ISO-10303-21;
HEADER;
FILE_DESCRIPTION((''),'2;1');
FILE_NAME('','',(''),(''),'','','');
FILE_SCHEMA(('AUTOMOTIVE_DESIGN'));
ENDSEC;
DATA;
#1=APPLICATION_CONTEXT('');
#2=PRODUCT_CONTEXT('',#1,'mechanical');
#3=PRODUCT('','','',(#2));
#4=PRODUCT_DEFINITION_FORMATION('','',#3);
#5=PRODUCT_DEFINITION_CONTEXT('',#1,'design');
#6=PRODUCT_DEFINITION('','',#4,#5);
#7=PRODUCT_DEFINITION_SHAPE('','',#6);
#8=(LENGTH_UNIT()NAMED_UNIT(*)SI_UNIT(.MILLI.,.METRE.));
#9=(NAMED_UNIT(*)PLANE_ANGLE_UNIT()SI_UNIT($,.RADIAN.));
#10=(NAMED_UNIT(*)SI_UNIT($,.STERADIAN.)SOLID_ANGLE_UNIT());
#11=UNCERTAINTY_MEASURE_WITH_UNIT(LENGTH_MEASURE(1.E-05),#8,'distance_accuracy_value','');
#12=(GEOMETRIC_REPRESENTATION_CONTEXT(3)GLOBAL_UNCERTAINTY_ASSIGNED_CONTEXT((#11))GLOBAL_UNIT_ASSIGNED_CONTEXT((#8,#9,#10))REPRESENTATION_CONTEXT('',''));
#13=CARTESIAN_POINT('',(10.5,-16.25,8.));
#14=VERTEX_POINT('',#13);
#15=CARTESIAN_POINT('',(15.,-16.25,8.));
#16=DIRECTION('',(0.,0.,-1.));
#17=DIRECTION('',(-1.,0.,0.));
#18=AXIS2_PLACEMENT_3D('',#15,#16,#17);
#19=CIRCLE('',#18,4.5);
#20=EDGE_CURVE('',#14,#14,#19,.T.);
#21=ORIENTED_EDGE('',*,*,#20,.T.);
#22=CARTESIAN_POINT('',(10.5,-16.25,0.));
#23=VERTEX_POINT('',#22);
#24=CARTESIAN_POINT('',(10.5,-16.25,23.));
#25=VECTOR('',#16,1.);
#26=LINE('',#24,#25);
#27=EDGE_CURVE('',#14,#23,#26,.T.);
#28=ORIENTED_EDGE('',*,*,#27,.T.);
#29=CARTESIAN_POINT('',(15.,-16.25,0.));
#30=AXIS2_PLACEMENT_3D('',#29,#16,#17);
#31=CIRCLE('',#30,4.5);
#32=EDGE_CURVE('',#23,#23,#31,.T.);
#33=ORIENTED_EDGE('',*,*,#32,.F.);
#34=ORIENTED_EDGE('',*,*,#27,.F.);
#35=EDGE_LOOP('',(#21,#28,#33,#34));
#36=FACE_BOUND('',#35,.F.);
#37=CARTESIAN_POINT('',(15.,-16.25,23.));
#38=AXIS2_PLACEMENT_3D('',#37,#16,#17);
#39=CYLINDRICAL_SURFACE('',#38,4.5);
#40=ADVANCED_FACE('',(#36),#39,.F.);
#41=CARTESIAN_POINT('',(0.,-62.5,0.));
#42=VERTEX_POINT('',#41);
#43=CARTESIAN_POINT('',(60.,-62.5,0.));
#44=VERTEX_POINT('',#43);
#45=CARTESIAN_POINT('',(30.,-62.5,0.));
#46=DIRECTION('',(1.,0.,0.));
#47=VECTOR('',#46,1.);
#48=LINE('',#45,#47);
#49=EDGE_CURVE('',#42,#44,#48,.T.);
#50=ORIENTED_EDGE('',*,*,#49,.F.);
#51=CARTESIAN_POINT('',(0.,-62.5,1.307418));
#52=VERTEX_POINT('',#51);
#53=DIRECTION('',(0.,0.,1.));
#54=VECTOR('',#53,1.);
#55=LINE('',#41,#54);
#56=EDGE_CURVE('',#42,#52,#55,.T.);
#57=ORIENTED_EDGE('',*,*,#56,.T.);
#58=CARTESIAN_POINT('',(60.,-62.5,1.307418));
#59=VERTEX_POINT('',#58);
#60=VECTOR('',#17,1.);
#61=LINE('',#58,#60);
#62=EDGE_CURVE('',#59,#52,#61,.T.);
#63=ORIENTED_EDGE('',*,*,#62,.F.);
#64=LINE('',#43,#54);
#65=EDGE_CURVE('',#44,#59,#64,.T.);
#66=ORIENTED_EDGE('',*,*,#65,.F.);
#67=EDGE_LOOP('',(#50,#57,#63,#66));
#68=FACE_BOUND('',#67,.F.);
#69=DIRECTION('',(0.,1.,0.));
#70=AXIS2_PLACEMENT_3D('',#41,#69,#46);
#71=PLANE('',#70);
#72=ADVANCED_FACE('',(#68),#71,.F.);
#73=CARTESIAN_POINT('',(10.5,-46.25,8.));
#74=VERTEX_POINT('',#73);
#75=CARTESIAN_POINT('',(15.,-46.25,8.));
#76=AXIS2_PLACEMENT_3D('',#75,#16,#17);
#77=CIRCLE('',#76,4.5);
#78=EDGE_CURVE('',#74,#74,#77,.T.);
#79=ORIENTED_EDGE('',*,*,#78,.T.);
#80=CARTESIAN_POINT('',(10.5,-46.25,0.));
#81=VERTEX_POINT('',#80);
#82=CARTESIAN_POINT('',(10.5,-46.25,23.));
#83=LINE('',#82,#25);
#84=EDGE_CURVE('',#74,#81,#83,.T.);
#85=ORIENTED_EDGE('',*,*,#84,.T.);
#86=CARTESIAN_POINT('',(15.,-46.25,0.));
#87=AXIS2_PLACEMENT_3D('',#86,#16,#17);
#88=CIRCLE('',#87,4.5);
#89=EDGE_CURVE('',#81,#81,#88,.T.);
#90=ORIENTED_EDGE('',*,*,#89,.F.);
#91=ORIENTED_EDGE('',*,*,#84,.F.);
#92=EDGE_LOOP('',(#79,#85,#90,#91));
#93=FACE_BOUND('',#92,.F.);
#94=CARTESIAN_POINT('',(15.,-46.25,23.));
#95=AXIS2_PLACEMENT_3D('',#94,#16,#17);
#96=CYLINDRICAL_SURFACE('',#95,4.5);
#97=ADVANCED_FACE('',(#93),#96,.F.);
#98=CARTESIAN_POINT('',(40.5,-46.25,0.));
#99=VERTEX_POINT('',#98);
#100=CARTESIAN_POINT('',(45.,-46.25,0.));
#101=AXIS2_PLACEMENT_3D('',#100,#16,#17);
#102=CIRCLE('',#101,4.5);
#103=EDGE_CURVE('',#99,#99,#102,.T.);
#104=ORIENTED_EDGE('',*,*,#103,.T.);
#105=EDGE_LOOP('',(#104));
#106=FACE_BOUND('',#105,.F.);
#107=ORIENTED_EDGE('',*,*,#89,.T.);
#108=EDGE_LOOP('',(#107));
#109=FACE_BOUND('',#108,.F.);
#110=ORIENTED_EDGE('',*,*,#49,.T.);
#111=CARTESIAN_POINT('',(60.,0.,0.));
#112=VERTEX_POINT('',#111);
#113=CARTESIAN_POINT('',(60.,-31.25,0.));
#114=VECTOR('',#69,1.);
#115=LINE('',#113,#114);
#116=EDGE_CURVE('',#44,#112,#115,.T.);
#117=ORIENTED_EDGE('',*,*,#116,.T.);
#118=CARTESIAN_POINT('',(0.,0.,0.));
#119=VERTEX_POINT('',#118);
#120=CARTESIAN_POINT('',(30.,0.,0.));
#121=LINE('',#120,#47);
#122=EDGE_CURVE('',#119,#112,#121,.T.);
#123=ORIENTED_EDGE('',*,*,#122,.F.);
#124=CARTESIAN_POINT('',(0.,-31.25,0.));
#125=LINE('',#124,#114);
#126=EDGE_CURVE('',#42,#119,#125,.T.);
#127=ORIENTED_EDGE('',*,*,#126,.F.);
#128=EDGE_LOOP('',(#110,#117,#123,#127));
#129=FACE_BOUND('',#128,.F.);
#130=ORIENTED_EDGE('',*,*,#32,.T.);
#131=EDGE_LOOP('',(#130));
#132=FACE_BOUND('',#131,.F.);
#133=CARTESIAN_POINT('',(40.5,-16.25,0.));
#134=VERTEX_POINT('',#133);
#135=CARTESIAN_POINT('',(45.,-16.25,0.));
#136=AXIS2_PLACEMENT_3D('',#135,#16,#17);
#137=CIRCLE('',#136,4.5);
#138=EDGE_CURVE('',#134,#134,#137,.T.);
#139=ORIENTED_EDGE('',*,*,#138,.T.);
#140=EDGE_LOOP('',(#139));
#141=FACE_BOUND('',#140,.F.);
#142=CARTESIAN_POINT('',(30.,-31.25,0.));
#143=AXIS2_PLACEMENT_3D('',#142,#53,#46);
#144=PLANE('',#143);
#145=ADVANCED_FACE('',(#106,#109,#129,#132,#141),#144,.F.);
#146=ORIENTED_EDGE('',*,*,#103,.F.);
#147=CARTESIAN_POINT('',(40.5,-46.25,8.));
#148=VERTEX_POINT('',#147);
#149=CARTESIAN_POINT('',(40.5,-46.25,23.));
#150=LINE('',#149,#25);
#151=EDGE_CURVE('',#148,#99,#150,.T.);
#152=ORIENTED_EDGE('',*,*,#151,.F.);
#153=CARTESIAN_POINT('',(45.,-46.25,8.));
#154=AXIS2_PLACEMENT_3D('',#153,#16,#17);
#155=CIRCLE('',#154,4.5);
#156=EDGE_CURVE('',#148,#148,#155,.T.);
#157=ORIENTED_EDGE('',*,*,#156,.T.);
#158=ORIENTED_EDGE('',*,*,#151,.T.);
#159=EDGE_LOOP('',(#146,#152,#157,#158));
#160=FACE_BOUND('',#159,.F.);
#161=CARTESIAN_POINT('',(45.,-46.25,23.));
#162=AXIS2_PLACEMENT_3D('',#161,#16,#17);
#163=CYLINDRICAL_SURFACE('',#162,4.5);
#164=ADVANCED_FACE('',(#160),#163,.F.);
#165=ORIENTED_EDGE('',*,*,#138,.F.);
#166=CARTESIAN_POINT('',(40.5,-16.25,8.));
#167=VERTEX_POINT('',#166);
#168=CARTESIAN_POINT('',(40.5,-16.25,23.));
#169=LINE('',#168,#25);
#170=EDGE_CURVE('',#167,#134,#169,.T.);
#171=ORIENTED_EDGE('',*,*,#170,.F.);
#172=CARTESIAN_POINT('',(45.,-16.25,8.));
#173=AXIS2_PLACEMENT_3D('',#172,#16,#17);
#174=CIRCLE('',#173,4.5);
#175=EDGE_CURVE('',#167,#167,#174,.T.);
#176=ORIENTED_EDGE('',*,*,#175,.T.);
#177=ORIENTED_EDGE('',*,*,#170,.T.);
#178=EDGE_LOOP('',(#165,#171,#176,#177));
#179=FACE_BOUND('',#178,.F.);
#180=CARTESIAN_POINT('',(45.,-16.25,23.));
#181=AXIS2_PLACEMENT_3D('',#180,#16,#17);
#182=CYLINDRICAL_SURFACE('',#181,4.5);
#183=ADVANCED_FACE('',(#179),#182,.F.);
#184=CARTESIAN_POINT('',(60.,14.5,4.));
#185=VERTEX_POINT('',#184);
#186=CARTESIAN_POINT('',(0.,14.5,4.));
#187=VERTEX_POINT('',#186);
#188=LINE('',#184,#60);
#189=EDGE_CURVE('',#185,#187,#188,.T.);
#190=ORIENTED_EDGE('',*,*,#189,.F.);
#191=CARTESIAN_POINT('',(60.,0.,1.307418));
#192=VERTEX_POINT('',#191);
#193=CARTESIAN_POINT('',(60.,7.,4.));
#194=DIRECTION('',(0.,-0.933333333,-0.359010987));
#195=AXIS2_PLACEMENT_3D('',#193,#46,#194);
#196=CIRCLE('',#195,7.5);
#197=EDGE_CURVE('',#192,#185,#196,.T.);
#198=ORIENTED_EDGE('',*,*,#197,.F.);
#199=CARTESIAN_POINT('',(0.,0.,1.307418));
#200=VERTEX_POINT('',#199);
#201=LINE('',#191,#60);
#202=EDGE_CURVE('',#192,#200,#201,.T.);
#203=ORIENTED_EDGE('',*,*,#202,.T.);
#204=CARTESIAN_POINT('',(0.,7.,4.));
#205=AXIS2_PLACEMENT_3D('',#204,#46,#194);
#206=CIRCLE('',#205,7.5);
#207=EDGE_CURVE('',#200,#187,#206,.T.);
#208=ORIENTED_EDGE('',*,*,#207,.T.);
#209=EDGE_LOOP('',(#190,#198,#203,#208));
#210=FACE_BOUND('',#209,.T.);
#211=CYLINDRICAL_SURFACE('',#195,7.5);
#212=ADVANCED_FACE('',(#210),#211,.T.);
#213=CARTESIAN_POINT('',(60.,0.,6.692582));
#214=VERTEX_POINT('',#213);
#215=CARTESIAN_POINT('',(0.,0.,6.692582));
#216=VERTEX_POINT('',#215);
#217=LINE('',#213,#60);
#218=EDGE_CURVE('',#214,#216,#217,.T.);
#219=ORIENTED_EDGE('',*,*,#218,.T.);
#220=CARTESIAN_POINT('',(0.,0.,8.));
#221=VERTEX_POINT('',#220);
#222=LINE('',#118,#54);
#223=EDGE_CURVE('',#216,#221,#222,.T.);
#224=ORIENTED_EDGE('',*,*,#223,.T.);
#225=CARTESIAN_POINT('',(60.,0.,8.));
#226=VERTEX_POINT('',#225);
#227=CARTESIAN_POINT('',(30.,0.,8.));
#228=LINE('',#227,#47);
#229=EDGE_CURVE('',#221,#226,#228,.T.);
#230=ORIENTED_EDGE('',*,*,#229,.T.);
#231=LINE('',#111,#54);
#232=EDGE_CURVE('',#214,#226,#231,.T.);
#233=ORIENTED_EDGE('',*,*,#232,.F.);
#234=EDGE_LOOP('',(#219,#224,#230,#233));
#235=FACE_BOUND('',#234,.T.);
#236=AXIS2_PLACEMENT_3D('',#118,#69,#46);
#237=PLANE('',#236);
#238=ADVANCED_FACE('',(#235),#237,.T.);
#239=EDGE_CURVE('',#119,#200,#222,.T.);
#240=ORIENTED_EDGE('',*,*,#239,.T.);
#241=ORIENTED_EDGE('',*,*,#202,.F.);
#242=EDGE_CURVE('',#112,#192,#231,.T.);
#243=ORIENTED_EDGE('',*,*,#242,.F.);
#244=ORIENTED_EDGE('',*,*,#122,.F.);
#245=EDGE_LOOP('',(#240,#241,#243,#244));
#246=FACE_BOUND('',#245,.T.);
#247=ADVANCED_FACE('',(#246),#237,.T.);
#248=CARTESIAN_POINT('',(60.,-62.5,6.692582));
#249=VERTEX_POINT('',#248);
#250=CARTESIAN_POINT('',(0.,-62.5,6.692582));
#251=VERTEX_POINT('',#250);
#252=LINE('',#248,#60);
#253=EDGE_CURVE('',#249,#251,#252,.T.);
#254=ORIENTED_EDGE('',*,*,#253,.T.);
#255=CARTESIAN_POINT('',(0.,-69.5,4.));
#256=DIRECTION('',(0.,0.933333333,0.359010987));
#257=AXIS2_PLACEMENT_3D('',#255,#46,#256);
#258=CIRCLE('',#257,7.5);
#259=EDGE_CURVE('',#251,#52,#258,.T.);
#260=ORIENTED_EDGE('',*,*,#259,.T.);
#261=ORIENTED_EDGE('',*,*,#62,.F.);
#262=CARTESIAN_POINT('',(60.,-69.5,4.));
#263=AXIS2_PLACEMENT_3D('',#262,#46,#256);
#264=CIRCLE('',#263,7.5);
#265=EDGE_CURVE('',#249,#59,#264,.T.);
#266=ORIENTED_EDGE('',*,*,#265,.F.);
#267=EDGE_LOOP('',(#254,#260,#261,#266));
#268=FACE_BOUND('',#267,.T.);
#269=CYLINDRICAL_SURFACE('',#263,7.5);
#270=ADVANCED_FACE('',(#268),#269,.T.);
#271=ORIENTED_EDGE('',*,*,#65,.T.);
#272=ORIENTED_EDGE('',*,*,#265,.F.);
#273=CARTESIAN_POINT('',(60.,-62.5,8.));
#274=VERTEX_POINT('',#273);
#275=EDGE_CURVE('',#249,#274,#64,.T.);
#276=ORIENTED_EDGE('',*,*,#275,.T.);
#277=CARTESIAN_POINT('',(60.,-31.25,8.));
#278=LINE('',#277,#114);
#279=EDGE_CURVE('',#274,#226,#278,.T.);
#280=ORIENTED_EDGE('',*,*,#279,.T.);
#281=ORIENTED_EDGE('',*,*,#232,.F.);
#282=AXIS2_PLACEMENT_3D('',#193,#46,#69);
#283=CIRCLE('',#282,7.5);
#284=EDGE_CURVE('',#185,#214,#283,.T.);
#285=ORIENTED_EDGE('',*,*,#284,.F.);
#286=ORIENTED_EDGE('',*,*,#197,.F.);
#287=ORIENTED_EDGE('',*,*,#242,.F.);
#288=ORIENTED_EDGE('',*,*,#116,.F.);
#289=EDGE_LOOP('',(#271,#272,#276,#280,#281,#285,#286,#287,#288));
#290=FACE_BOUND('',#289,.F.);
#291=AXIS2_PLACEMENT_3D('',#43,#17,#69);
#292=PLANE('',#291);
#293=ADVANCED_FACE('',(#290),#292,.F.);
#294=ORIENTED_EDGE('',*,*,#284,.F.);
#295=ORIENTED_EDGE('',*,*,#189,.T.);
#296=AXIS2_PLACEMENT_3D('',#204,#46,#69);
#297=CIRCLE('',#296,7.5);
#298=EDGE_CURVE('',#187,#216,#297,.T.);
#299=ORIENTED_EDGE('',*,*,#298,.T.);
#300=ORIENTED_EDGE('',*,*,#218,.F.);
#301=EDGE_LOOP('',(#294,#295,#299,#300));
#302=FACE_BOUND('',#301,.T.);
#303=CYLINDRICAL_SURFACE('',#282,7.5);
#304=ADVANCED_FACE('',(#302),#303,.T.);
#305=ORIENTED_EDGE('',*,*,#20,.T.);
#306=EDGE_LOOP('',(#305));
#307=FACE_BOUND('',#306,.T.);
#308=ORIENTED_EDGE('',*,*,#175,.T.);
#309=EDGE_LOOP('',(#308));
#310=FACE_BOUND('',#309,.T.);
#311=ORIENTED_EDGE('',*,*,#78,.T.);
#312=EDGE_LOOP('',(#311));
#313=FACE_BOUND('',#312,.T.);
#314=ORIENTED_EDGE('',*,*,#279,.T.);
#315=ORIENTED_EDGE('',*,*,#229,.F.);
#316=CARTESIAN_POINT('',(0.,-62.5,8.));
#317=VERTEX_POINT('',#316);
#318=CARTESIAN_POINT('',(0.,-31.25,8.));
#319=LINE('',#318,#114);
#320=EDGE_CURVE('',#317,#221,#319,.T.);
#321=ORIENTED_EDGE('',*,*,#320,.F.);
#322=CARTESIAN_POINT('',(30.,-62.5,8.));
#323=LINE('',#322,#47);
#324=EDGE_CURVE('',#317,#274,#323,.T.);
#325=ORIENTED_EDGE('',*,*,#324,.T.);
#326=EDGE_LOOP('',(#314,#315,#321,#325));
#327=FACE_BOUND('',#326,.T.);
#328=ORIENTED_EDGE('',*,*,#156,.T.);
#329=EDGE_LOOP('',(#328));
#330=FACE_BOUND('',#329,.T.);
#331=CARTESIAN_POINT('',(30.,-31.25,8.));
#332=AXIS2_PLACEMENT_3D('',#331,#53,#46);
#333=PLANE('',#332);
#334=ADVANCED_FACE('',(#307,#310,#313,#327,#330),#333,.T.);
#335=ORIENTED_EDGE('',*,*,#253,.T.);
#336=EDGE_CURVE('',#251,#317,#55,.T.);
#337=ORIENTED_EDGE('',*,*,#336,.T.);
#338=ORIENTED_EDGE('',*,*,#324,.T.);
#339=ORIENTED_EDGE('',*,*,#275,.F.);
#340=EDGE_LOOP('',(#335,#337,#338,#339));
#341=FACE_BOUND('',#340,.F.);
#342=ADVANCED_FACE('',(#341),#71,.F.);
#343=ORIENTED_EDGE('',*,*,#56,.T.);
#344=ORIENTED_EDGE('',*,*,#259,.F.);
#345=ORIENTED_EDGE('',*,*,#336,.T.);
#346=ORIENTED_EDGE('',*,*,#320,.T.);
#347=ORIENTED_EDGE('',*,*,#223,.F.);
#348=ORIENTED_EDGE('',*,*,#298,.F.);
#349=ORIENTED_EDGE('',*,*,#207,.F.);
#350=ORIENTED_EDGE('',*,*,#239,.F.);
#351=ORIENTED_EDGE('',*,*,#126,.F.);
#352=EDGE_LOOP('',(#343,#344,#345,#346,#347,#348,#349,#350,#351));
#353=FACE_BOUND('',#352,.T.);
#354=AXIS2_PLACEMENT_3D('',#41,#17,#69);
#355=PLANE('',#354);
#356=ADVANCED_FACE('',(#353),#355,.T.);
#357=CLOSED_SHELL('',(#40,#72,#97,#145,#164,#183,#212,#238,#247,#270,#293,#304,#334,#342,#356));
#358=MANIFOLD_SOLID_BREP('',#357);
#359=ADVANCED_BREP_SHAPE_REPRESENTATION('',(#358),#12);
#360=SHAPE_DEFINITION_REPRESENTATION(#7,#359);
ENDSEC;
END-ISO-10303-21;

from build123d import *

# Parameters (mm, degrees)
F0_W     = 60
F0_H     = 62.5
F1_DEPTH = 8
F3_D     = 9
F3_DEPTH = 15
F3_TIP   = 2.7038727856
F5_DEPTH = 60


with BuildPart() as f1:
    # F0 (on Top) → F1 (new body)
    with BuildSketch(Plane.XY):
        with Locations((30, -31.25)):
            Rectangle(F0_W, F0_H)
    extrude(amount=F1_DEPTH)

    # F3
    with Locations(Plane.XY.offset(8)):
        with Locations((15, -16.25), (45, -16.25), (45, -46.25), (15, -46.25)):
            Hole(F3_D / 2, depth=F3_DEPTH)
            with Locations((0, 0, -(F3_DEPTH + F3_TIP / 2))):  # 118° drill point
                Cone(0, F3_D / 2, F3_TIP, mode=Mode.SUBTRACT)

    # F4 (on face) → F5 (join)
    with BuildSketch(Plane.YZ.offset(60)):
        with BuildLine():
            ThreePointArc((-62.5, 1.3074175964), (-62.1260593981, 2.6306936062), (-62, 4))
            ThreePointArc((-62, 4), (-62.1260593981, 5.3693063938), (-62.5, 6.6925824036))
            Line((-62.5, 6.6925824036), (-62.5, 1.3074175964))
        make_face()
        with BuildLine():
            Line((-62.5, 1.3074175964), (-62.5, 6.6925824036))
            ThreePointArc((-62.5, 6.6925824036), (-77, 4), (-62.5, 1.3074175964))
        make_face()
        with BuildLine():
            ThreePointArc((14.5, 4), (8.3693063938, 11.3739406019), (0, 6.6925824036))
            Line((0, 6.6925824036), (0, 1.3074175964))
            ThreePointArc((0, 1.3074175964), (8.3693063938, -3.3739406019), (14.5, 4))
        make_face()
    extrude(amount=-F5_DEPTH)


solid = f1.part
